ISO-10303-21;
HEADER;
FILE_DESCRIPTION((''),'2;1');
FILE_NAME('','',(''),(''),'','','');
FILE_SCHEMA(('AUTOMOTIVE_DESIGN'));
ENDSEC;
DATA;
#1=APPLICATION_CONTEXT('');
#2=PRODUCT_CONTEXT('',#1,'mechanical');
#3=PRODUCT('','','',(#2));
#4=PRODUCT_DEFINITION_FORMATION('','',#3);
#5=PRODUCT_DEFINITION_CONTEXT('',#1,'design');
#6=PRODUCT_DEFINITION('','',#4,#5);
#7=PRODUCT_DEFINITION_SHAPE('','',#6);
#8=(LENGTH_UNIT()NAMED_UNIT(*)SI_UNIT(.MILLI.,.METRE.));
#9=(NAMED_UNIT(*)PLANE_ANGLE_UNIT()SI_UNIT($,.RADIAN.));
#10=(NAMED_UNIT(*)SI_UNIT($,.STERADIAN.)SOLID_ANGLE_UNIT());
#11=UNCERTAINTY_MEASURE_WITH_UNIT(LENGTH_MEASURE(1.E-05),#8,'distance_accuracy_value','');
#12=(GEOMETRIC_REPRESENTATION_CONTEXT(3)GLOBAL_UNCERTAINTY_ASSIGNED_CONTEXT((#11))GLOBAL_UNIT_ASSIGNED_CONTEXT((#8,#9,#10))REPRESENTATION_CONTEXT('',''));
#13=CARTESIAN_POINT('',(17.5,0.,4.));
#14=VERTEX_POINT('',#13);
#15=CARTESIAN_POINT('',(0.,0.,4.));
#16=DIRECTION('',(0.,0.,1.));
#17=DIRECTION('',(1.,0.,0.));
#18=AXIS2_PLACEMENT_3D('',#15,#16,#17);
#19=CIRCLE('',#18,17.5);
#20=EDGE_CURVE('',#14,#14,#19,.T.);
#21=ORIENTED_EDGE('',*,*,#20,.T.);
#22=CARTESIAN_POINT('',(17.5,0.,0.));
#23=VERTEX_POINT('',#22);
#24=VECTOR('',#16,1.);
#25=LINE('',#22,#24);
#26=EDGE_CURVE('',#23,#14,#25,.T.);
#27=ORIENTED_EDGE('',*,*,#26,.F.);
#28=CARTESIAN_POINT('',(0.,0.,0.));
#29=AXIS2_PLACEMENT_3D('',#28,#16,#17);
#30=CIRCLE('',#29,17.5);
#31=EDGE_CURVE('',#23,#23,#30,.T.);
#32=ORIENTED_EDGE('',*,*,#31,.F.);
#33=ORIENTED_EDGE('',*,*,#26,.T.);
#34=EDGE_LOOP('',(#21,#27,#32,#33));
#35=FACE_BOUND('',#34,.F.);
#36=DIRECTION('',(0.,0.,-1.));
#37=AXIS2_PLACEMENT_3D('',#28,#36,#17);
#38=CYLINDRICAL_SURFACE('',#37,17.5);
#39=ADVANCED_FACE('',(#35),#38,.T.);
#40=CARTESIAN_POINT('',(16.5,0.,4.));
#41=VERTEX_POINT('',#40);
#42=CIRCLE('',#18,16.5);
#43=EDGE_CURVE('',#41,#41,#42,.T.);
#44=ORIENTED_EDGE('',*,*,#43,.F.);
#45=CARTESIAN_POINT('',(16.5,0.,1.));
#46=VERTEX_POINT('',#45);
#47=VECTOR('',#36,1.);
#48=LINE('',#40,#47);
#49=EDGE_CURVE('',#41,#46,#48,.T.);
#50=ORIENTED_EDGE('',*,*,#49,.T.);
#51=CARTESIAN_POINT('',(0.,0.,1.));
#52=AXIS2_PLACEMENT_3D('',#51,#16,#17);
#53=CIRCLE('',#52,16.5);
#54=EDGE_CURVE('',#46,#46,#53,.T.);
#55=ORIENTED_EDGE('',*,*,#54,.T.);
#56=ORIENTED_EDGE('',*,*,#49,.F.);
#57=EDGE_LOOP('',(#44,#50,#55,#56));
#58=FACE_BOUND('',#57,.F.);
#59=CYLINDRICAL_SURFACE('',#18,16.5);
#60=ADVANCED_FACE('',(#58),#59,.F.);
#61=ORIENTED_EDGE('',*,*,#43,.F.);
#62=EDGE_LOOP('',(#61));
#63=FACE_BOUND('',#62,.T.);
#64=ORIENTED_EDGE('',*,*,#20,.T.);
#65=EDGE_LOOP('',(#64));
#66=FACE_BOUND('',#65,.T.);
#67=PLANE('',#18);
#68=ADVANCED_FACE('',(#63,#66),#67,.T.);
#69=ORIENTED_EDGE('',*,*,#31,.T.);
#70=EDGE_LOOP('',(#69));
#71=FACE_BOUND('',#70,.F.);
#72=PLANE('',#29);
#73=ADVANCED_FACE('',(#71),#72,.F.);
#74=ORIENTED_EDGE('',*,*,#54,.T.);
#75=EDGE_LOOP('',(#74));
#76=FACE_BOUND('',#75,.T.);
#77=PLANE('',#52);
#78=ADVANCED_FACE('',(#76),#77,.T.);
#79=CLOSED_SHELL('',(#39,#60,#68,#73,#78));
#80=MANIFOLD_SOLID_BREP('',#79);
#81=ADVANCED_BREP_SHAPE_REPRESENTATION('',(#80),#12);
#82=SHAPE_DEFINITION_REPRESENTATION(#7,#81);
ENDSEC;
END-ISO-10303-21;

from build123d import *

# Parameters (mm, degrees)
F0_R     = 17.5
F1_DEPTH = 4
F2_R     = 16.5
F3_DEPTH = 3


# Not quite as in the source:
# - the program builds the solid bodies; features that only make, move or delete a surface that nothing else refers to are left out


with BuildPart() as f1:
    # F0 (on Top) → F1 (new body)
    with BuildSketch(Plane.XY):
        Circle(F0_R)
    extrude(amount=F1_DEPTH)

    # F2 (on face) → F3 (cut)
    with BuildSketch(Plane.XY.offset(4)):
        Circle(F2_R)
    extrude(amount=-F3_DEPTH, mode=Mode.SUBTRACT)


solid = f1.part
